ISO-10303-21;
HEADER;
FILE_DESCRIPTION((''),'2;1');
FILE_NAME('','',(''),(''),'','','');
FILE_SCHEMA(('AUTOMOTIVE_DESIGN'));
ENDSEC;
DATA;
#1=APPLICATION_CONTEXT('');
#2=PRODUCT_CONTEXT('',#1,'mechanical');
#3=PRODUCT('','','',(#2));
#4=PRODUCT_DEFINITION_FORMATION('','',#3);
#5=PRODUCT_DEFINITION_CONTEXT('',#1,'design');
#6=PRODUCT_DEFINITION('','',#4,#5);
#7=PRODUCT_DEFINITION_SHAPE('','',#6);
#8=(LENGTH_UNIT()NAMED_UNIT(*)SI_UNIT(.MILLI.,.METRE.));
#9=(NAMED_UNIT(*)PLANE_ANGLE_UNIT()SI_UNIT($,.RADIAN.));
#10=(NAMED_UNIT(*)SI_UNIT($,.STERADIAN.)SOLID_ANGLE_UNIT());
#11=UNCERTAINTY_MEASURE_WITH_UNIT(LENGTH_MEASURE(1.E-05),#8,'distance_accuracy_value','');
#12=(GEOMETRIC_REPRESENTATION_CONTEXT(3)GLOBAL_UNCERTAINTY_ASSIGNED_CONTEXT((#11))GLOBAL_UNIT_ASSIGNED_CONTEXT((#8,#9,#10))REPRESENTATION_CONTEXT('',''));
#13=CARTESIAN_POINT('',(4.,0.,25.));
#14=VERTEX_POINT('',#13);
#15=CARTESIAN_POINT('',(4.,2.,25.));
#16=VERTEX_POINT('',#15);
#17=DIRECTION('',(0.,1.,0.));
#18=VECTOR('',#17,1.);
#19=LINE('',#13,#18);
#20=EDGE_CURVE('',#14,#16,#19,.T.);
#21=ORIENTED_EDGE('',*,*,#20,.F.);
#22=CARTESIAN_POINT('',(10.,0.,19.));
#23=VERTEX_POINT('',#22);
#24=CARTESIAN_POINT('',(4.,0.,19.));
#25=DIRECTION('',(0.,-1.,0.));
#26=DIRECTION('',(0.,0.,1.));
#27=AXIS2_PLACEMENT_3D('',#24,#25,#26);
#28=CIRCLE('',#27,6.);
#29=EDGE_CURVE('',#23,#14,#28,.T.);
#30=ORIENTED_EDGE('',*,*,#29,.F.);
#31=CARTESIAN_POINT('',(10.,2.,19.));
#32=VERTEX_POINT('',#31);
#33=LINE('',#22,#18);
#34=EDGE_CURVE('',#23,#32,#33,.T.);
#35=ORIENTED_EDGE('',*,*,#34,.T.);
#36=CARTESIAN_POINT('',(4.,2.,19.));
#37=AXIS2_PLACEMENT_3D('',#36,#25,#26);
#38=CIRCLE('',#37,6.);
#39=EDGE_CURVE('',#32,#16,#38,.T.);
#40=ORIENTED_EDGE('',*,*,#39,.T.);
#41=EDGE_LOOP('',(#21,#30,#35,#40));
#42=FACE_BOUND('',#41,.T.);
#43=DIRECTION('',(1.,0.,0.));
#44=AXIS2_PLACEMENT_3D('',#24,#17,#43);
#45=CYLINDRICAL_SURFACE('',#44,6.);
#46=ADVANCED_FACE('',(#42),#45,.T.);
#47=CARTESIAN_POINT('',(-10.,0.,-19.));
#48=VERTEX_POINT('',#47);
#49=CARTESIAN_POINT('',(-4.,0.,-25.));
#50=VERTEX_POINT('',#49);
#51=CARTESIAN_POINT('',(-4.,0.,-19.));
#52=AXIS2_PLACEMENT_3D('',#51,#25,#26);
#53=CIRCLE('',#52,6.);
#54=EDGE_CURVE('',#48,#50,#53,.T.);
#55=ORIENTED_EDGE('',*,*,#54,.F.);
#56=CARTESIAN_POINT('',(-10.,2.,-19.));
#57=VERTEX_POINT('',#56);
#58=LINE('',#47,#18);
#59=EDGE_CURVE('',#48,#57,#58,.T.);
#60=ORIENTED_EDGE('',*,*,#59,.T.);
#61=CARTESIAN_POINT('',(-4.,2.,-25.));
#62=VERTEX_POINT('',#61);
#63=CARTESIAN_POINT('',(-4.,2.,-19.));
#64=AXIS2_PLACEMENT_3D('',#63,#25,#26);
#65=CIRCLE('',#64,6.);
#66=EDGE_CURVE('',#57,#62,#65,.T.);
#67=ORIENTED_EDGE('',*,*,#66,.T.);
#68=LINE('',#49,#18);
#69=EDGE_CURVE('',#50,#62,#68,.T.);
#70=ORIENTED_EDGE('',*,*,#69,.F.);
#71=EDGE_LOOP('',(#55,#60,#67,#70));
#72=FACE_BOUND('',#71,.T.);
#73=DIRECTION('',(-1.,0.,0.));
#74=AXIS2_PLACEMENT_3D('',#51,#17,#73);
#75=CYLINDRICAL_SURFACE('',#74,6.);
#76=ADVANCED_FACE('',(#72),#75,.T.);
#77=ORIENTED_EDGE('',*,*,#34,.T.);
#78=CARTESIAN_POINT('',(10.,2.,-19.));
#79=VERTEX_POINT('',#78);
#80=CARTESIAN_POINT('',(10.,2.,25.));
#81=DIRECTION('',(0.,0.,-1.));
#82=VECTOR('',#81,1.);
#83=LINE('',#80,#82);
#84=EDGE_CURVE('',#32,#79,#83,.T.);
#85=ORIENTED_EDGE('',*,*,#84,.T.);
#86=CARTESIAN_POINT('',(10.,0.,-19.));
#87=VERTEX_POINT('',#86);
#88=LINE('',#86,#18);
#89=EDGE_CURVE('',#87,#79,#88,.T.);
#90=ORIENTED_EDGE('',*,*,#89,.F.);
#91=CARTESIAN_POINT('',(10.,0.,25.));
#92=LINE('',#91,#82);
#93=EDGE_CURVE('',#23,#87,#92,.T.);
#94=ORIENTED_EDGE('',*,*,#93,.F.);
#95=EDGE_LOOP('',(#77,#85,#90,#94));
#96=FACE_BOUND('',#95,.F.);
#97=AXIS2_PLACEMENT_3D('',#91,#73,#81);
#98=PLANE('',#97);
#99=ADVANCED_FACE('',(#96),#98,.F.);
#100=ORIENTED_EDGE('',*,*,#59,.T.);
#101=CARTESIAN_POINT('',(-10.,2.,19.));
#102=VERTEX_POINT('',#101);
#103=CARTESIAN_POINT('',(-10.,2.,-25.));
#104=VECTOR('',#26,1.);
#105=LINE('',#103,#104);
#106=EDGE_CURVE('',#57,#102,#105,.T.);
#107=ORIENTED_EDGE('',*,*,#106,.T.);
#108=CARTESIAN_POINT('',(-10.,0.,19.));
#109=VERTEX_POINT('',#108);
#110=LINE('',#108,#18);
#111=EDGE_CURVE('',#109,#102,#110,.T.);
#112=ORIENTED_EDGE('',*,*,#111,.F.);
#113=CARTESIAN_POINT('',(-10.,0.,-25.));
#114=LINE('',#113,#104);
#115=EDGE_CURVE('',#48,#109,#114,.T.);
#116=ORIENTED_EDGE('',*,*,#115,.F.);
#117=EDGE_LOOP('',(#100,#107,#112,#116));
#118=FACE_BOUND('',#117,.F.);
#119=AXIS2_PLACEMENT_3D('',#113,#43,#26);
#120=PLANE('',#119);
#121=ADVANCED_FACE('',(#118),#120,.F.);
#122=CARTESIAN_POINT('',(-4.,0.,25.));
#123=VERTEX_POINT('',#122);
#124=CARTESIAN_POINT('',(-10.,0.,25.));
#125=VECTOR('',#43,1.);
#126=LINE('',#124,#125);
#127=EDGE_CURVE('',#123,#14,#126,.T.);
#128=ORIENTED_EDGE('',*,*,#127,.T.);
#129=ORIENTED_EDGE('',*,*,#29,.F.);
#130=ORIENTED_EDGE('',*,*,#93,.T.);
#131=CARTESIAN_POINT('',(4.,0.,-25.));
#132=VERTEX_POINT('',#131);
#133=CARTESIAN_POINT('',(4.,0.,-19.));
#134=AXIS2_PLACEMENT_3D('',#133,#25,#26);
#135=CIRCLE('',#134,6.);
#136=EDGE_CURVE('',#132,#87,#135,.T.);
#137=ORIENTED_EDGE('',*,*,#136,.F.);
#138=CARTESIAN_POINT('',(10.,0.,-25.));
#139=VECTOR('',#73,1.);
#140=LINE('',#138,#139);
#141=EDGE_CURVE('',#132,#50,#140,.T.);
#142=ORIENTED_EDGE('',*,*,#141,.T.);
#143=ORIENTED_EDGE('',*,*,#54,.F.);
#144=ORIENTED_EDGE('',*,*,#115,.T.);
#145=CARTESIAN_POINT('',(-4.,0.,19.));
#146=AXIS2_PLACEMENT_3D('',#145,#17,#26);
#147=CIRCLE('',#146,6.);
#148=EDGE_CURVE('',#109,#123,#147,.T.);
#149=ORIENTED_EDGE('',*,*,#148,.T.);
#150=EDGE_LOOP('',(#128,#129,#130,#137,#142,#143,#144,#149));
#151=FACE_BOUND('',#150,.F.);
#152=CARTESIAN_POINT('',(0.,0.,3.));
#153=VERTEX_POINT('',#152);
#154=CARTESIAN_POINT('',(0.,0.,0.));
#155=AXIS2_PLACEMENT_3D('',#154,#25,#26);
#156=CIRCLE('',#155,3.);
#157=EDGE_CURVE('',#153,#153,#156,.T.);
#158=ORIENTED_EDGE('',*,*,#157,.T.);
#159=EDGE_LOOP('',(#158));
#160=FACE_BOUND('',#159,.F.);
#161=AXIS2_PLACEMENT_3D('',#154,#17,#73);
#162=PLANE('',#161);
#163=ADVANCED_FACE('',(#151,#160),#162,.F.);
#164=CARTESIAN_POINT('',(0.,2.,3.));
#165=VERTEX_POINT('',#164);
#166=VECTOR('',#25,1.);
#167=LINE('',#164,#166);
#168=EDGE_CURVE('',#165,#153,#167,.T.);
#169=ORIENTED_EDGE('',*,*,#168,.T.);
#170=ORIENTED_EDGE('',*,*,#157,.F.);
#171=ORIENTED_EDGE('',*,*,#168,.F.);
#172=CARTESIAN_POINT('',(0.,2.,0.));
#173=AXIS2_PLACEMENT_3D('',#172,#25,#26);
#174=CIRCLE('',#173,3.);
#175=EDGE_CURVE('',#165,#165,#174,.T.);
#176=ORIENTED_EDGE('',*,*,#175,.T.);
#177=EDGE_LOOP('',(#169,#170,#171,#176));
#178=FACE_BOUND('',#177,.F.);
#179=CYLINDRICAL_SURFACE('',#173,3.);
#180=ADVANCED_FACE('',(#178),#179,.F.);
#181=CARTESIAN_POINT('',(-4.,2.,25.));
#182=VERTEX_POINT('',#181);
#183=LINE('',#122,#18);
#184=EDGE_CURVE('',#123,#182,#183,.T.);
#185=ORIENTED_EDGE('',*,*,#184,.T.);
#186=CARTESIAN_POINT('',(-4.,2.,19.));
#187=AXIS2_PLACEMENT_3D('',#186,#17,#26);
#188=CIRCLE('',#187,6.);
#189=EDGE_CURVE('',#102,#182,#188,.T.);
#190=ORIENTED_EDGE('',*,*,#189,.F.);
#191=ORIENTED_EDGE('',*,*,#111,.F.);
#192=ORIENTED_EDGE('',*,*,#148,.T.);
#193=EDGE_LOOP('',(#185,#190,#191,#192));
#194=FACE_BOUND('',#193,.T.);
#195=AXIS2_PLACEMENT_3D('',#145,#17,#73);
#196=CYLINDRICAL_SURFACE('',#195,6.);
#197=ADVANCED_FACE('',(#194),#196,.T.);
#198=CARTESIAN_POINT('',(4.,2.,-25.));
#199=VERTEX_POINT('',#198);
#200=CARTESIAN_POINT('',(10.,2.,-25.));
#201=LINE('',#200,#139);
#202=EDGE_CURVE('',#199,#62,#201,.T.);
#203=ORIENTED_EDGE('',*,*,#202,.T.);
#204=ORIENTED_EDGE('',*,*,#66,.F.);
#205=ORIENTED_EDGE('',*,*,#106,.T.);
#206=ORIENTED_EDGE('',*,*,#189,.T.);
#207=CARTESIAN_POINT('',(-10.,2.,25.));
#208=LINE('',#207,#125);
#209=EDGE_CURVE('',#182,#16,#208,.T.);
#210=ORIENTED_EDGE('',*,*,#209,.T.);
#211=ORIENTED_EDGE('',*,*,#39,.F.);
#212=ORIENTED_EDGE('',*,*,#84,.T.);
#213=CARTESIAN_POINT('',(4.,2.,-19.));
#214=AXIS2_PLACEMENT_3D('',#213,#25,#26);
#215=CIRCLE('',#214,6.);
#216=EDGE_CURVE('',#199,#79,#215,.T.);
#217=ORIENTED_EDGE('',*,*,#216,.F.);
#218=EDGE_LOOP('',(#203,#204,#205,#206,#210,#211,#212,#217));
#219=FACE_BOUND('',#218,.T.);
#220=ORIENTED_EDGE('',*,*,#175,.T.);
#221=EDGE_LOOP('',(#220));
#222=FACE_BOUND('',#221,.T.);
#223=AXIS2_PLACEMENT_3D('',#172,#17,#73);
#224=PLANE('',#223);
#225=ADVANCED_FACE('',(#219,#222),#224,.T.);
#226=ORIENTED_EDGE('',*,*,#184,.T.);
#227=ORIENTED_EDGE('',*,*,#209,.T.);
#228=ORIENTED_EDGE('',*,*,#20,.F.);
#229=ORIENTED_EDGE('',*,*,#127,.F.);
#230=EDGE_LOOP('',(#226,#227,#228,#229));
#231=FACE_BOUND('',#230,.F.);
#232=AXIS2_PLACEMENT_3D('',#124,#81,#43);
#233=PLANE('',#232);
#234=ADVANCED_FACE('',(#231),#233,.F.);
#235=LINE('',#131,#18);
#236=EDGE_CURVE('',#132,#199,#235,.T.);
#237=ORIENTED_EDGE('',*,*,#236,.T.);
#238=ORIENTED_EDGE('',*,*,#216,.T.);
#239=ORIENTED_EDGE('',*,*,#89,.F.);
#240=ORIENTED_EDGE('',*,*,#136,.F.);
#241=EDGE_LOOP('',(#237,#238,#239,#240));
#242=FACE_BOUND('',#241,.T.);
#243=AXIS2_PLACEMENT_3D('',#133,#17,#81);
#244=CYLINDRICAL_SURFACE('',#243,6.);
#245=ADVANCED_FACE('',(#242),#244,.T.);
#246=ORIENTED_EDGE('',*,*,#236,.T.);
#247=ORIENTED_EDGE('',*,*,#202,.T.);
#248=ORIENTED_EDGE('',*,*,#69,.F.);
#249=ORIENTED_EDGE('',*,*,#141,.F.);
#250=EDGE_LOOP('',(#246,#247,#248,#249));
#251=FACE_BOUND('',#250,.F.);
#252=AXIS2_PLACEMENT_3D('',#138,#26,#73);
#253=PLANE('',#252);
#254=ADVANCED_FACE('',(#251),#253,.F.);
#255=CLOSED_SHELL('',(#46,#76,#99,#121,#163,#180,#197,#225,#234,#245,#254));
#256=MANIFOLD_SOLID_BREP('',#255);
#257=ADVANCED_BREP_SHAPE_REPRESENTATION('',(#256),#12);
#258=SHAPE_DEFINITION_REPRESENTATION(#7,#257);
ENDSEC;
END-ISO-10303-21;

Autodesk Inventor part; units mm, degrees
ref_plane "YZ Plane" through (0, 0, 0) normal (1, 0, 0) x (0, 1, 0)
ref_plane "XZ Plane" through (0, 0, 0) normal (0, 1, 0) x (-1, 0, 0)
ref_plane "XY Plane" through (0, 0, 0) normal (0, 0, 1) x (1, 0, 0)
sketch "草圖1" plane through (0, 0, 0) normal (0, 1, 0) x (-1, 0, 0)
  line L0 (10, 25) -> (-10, 25)
  line L1 (-10, 25) -> (-10, -25)
  line L2 (-10, -25) -> (10, -25)
  line L3 (10, -25) -> (10, 25)
  line L4 (10, 25) -> (-10, -25) construction
  line L5 (-10, 25) -> (10, -25) construction
  point P0 (0, 0)
  dimension "d0" = 20
  dimension "d1" = 50
extrude "平板1" add sketch "草圖1" along normal blind 2
fillet "轉角外圓角1" radius 6 4 edges at (10, 1, 25) (-10, 1, 25) (-10, 1, -25) (10, 1, -25)
sketch "草圖4" plane through (0, 2, 0) normal (0, 1, 0) x (1, 0, 0)
  point P0 (0, 0)
  point P1 (0, 0)
hole "孔2" at (0, 2, 0) direction (0, -1, 0) diameter 6 end through all
equation "\"d18\" = 厚度"
equation "\"d2\" = 厚度"
equation "\"折彎半徑\" = 厚度"
equation "\"折彎離隙寬度\" = 厚度"
equation "\"折彎離隙深度\" = 0.5 * 厚度"
equation "\"轉角離隙大小\" = 4 * 厚度"
equation "\"最小剩餘\" = 2 * 厚度"
equation "\"轉移半徑\" = 折彎半徑"
equation "\"Jacobi半徑大小\" = 折彎半徑"
equation "\"間隙大小\" = 厚度"
equation "\"厚度\" = 2"
properties part number "底部外殼固定板金"
